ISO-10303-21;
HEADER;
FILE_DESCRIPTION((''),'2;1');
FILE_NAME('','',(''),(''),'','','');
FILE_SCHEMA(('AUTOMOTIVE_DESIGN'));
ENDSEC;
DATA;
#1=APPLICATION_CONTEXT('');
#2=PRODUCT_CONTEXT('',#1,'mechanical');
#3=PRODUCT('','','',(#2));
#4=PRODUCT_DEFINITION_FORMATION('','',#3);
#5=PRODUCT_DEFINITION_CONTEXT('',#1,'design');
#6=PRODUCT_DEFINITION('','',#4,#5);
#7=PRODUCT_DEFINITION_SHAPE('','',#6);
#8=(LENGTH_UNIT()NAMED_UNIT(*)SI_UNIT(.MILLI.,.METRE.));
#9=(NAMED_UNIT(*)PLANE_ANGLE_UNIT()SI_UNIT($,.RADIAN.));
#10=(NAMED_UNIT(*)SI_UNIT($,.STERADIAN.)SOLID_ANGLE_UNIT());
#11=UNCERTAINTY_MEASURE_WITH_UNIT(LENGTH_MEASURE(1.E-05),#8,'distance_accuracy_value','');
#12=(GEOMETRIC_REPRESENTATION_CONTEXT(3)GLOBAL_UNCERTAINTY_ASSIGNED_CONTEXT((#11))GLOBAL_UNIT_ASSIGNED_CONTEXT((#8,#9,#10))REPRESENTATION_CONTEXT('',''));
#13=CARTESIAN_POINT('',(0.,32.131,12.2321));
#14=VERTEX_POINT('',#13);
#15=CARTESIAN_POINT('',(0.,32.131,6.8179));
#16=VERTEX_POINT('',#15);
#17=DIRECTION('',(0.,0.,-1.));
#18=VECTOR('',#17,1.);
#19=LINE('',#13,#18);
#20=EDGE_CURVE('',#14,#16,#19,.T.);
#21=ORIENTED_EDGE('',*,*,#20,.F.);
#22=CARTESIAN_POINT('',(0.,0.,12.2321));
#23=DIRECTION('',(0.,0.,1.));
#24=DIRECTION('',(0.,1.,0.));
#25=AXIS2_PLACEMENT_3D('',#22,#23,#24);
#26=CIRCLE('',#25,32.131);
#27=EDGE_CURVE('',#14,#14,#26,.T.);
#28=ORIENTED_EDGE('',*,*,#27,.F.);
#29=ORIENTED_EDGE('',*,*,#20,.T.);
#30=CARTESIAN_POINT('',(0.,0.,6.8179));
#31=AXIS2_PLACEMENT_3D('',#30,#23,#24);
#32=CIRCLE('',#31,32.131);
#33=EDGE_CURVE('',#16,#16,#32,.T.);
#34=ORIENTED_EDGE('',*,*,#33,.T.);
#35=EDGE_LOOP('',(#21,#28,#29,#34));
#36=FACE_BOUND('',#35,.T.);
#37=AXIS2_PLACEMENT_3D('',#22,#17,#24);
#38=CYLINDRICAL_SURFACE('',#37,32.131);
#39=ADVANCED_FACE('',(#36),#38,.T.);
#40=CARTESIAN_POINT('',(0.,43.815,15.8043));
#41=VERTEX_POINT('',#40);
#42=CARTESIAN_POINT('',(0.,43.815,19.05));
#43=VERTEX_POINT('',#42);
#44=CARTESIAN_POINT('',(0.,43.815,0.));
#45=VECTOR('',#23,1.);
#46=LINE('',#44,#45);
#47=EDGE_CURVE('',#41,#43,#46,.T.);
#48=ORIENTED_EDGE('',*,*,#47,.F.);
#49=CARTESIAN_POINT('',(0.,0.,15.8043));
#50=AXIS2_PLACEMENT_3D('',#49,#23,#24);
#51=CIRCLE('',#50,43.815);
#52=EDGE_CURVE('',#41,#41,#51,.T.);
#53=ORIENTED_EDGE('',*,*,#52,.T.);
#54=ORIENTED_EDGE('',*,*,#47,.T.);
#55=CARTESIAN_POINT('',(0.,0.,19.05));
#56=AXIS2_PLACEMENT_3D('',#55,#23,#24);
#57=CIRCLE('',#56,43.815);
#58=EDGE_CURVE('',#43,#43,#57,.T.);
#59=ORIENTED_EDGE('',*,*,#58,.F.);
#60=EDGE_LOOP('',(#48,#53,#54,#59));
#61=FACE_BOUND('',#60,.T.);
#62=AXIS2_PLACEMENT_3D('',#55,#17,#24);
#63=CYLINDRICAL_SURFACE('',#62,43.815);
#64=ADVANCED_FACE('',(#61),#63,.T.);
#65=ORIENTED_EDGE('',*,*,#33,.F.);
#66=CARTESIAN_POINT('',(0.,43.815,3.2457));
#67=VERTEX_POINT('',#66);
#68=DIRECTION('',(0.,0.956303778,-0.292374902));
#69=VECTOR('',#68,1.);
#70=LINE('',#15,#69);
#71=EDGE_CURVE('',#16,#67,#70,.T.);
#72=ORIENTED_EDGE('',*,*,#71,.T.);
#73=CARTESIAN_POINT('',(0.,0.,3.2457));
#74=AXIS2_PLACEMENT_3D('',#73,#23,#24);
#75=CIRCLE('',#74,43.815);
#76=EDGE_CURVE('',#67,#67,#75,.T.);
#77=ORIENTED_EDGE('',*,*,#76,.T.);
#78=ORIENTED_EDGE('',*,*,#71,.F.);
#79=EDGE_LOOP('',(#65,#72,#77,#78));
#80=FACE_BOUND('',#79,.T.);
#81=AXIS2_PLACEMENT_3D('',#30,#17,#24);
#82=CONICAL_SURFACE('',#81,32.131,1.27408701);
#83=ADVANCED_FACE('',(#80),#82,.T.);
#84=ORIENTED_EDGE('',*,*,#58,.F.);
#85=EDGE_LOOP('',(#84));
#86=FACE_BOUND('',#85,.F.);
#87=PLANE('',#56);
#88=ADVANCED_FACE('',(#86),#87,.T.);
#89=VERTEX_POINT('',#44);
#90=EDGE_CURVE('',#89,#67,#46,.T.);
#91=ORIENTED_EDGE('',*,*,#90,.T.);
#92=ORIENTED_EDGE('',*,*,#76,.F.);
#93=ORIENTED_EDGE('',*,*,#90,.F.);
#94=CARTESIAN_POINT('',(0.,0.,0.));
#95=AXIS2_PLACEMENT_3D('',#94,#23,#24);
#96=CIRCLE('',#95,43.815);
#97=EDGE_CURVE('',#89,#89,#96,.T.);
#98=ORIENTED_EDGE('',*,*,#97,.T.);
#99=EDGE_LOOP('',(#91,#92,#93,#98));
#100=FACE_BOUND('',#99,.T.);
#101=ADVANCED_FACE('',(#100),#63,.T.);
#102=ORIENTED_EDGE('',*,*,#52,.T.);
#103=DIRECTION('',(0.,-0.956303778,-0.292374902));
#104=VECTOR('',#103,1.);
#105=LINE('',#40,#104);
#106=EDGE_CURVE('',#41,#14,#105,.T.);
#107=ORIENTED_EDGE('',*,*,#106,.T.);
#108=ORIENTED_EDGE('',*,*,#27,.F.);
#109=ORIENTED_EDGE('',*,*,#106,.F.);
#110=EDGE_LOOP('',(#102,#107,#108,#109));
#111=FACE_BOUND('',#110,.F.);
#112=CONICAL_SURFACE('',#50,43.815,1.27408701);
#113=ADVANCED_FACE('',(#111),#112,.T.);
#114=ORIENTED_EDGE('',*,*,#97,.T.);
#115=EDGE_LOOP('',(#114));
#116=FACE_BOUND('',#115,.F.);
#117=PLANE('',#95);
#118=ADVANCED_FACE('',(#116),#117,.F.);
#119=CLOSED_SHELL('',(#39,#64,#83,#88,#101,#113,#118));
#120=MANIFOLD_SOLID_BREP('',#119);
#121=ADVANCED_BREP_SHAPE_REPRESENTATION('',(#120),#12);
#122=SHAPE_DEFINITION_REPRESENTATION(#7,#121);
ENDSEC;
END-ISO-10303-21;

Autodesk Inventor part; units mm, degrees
ref_plane "YZ Plane" through (0, 0, 0) normal (1, 0, 0) x (0, 1, 0)
ref_plane "XZ Plane" through (0, 0, 0) normal (0, 1, 0) x (-1, 0, 0)
sketch "Main Sketch" plane through (0, 0, 0) normal (1, 0, 0) x (0, 1, 0)
  line L0 (0, 19.05) -> (43.815, 19.05)
  line L1 (43.815, 19.05) -> (43.815, 15.8043)
  line L2 (43.815, 15.8043) -> (32.131, 12.2321)
  line L3 (32.131, 12.2321) -> (32.131, 6.8179)
  line L4 (32.131, 6.8179) -> (43.815, 3.2457)
  line L5 (43.815, 3.2457) -> (43.815, 0)
  line L6 (43.815, 0) -> (0, 0)
  line L7 (40.64, 14.8336) -> (40.64, 4.2164) construction
  line L8 (32.131, 9.525) -> (40.64, 9.525) construction
  line L9 (43.815, 15.8043) -> (43.815, 3.2457)
  line L10 (0, -4) -> (0, 24) projected
  line L11 (0, 0) -> (0, 19.05)
  dimension "d0" = 10.6172
  dimension "d1" = 34
  dimension "d2" = 3.175
  dimension "d6" = 19.05
  dimension "d21" = 81.28
  dimension "d25" = 11.684
  dimension "d27" = 9.525
ref_plane "Belt Plane" through (0, 32.131, 9.525) normal (0, 0, 1) x (1, 0, 0)
revolve "Body" add sketch "Main Sketch" angle 360 about axis through (0, 0, -10) along (0, 0, 1)
revolve "Groove" cut sketch "Main Sketch" angle 360 about axis through (0, 0, -10) along (0, 0, 1) contours L9 L4 L3 L2
fillet "Fillet External" [suppressed]
fillet "Fillet Internal" [suppressed]
pattern_of_one "Groove Pattern"
equation "\"d0\" = da_Bw"
equation "\"d1\" = da_Alfa"
equation "\"d2\" = da_c"
equation "\"d21\" = da_Dw"
equation "\"d25\" = da_Hd"
equation "\"d27\" = da_Se"
equation "\"da_r1\" = 0"
equation "\"da_r2\" = 0"
equation "\"d18\" = da_Sg"
equation "\"d5\" = da_Se"
equation "\"da_Bw\" = 10.6172"
equation "\"da_Alfa\" = 34deg"
equation "\"da_c\" = 3.175"
equation "\"da_Dw\" = 81.28"
equation "\"da_Hd\" = 11.684"
equation "\"da_Se\" = 9.525"
equation "\"da_Sg\" = 15.875"
properties part number "Grooved Pulley2" material "Steel"
